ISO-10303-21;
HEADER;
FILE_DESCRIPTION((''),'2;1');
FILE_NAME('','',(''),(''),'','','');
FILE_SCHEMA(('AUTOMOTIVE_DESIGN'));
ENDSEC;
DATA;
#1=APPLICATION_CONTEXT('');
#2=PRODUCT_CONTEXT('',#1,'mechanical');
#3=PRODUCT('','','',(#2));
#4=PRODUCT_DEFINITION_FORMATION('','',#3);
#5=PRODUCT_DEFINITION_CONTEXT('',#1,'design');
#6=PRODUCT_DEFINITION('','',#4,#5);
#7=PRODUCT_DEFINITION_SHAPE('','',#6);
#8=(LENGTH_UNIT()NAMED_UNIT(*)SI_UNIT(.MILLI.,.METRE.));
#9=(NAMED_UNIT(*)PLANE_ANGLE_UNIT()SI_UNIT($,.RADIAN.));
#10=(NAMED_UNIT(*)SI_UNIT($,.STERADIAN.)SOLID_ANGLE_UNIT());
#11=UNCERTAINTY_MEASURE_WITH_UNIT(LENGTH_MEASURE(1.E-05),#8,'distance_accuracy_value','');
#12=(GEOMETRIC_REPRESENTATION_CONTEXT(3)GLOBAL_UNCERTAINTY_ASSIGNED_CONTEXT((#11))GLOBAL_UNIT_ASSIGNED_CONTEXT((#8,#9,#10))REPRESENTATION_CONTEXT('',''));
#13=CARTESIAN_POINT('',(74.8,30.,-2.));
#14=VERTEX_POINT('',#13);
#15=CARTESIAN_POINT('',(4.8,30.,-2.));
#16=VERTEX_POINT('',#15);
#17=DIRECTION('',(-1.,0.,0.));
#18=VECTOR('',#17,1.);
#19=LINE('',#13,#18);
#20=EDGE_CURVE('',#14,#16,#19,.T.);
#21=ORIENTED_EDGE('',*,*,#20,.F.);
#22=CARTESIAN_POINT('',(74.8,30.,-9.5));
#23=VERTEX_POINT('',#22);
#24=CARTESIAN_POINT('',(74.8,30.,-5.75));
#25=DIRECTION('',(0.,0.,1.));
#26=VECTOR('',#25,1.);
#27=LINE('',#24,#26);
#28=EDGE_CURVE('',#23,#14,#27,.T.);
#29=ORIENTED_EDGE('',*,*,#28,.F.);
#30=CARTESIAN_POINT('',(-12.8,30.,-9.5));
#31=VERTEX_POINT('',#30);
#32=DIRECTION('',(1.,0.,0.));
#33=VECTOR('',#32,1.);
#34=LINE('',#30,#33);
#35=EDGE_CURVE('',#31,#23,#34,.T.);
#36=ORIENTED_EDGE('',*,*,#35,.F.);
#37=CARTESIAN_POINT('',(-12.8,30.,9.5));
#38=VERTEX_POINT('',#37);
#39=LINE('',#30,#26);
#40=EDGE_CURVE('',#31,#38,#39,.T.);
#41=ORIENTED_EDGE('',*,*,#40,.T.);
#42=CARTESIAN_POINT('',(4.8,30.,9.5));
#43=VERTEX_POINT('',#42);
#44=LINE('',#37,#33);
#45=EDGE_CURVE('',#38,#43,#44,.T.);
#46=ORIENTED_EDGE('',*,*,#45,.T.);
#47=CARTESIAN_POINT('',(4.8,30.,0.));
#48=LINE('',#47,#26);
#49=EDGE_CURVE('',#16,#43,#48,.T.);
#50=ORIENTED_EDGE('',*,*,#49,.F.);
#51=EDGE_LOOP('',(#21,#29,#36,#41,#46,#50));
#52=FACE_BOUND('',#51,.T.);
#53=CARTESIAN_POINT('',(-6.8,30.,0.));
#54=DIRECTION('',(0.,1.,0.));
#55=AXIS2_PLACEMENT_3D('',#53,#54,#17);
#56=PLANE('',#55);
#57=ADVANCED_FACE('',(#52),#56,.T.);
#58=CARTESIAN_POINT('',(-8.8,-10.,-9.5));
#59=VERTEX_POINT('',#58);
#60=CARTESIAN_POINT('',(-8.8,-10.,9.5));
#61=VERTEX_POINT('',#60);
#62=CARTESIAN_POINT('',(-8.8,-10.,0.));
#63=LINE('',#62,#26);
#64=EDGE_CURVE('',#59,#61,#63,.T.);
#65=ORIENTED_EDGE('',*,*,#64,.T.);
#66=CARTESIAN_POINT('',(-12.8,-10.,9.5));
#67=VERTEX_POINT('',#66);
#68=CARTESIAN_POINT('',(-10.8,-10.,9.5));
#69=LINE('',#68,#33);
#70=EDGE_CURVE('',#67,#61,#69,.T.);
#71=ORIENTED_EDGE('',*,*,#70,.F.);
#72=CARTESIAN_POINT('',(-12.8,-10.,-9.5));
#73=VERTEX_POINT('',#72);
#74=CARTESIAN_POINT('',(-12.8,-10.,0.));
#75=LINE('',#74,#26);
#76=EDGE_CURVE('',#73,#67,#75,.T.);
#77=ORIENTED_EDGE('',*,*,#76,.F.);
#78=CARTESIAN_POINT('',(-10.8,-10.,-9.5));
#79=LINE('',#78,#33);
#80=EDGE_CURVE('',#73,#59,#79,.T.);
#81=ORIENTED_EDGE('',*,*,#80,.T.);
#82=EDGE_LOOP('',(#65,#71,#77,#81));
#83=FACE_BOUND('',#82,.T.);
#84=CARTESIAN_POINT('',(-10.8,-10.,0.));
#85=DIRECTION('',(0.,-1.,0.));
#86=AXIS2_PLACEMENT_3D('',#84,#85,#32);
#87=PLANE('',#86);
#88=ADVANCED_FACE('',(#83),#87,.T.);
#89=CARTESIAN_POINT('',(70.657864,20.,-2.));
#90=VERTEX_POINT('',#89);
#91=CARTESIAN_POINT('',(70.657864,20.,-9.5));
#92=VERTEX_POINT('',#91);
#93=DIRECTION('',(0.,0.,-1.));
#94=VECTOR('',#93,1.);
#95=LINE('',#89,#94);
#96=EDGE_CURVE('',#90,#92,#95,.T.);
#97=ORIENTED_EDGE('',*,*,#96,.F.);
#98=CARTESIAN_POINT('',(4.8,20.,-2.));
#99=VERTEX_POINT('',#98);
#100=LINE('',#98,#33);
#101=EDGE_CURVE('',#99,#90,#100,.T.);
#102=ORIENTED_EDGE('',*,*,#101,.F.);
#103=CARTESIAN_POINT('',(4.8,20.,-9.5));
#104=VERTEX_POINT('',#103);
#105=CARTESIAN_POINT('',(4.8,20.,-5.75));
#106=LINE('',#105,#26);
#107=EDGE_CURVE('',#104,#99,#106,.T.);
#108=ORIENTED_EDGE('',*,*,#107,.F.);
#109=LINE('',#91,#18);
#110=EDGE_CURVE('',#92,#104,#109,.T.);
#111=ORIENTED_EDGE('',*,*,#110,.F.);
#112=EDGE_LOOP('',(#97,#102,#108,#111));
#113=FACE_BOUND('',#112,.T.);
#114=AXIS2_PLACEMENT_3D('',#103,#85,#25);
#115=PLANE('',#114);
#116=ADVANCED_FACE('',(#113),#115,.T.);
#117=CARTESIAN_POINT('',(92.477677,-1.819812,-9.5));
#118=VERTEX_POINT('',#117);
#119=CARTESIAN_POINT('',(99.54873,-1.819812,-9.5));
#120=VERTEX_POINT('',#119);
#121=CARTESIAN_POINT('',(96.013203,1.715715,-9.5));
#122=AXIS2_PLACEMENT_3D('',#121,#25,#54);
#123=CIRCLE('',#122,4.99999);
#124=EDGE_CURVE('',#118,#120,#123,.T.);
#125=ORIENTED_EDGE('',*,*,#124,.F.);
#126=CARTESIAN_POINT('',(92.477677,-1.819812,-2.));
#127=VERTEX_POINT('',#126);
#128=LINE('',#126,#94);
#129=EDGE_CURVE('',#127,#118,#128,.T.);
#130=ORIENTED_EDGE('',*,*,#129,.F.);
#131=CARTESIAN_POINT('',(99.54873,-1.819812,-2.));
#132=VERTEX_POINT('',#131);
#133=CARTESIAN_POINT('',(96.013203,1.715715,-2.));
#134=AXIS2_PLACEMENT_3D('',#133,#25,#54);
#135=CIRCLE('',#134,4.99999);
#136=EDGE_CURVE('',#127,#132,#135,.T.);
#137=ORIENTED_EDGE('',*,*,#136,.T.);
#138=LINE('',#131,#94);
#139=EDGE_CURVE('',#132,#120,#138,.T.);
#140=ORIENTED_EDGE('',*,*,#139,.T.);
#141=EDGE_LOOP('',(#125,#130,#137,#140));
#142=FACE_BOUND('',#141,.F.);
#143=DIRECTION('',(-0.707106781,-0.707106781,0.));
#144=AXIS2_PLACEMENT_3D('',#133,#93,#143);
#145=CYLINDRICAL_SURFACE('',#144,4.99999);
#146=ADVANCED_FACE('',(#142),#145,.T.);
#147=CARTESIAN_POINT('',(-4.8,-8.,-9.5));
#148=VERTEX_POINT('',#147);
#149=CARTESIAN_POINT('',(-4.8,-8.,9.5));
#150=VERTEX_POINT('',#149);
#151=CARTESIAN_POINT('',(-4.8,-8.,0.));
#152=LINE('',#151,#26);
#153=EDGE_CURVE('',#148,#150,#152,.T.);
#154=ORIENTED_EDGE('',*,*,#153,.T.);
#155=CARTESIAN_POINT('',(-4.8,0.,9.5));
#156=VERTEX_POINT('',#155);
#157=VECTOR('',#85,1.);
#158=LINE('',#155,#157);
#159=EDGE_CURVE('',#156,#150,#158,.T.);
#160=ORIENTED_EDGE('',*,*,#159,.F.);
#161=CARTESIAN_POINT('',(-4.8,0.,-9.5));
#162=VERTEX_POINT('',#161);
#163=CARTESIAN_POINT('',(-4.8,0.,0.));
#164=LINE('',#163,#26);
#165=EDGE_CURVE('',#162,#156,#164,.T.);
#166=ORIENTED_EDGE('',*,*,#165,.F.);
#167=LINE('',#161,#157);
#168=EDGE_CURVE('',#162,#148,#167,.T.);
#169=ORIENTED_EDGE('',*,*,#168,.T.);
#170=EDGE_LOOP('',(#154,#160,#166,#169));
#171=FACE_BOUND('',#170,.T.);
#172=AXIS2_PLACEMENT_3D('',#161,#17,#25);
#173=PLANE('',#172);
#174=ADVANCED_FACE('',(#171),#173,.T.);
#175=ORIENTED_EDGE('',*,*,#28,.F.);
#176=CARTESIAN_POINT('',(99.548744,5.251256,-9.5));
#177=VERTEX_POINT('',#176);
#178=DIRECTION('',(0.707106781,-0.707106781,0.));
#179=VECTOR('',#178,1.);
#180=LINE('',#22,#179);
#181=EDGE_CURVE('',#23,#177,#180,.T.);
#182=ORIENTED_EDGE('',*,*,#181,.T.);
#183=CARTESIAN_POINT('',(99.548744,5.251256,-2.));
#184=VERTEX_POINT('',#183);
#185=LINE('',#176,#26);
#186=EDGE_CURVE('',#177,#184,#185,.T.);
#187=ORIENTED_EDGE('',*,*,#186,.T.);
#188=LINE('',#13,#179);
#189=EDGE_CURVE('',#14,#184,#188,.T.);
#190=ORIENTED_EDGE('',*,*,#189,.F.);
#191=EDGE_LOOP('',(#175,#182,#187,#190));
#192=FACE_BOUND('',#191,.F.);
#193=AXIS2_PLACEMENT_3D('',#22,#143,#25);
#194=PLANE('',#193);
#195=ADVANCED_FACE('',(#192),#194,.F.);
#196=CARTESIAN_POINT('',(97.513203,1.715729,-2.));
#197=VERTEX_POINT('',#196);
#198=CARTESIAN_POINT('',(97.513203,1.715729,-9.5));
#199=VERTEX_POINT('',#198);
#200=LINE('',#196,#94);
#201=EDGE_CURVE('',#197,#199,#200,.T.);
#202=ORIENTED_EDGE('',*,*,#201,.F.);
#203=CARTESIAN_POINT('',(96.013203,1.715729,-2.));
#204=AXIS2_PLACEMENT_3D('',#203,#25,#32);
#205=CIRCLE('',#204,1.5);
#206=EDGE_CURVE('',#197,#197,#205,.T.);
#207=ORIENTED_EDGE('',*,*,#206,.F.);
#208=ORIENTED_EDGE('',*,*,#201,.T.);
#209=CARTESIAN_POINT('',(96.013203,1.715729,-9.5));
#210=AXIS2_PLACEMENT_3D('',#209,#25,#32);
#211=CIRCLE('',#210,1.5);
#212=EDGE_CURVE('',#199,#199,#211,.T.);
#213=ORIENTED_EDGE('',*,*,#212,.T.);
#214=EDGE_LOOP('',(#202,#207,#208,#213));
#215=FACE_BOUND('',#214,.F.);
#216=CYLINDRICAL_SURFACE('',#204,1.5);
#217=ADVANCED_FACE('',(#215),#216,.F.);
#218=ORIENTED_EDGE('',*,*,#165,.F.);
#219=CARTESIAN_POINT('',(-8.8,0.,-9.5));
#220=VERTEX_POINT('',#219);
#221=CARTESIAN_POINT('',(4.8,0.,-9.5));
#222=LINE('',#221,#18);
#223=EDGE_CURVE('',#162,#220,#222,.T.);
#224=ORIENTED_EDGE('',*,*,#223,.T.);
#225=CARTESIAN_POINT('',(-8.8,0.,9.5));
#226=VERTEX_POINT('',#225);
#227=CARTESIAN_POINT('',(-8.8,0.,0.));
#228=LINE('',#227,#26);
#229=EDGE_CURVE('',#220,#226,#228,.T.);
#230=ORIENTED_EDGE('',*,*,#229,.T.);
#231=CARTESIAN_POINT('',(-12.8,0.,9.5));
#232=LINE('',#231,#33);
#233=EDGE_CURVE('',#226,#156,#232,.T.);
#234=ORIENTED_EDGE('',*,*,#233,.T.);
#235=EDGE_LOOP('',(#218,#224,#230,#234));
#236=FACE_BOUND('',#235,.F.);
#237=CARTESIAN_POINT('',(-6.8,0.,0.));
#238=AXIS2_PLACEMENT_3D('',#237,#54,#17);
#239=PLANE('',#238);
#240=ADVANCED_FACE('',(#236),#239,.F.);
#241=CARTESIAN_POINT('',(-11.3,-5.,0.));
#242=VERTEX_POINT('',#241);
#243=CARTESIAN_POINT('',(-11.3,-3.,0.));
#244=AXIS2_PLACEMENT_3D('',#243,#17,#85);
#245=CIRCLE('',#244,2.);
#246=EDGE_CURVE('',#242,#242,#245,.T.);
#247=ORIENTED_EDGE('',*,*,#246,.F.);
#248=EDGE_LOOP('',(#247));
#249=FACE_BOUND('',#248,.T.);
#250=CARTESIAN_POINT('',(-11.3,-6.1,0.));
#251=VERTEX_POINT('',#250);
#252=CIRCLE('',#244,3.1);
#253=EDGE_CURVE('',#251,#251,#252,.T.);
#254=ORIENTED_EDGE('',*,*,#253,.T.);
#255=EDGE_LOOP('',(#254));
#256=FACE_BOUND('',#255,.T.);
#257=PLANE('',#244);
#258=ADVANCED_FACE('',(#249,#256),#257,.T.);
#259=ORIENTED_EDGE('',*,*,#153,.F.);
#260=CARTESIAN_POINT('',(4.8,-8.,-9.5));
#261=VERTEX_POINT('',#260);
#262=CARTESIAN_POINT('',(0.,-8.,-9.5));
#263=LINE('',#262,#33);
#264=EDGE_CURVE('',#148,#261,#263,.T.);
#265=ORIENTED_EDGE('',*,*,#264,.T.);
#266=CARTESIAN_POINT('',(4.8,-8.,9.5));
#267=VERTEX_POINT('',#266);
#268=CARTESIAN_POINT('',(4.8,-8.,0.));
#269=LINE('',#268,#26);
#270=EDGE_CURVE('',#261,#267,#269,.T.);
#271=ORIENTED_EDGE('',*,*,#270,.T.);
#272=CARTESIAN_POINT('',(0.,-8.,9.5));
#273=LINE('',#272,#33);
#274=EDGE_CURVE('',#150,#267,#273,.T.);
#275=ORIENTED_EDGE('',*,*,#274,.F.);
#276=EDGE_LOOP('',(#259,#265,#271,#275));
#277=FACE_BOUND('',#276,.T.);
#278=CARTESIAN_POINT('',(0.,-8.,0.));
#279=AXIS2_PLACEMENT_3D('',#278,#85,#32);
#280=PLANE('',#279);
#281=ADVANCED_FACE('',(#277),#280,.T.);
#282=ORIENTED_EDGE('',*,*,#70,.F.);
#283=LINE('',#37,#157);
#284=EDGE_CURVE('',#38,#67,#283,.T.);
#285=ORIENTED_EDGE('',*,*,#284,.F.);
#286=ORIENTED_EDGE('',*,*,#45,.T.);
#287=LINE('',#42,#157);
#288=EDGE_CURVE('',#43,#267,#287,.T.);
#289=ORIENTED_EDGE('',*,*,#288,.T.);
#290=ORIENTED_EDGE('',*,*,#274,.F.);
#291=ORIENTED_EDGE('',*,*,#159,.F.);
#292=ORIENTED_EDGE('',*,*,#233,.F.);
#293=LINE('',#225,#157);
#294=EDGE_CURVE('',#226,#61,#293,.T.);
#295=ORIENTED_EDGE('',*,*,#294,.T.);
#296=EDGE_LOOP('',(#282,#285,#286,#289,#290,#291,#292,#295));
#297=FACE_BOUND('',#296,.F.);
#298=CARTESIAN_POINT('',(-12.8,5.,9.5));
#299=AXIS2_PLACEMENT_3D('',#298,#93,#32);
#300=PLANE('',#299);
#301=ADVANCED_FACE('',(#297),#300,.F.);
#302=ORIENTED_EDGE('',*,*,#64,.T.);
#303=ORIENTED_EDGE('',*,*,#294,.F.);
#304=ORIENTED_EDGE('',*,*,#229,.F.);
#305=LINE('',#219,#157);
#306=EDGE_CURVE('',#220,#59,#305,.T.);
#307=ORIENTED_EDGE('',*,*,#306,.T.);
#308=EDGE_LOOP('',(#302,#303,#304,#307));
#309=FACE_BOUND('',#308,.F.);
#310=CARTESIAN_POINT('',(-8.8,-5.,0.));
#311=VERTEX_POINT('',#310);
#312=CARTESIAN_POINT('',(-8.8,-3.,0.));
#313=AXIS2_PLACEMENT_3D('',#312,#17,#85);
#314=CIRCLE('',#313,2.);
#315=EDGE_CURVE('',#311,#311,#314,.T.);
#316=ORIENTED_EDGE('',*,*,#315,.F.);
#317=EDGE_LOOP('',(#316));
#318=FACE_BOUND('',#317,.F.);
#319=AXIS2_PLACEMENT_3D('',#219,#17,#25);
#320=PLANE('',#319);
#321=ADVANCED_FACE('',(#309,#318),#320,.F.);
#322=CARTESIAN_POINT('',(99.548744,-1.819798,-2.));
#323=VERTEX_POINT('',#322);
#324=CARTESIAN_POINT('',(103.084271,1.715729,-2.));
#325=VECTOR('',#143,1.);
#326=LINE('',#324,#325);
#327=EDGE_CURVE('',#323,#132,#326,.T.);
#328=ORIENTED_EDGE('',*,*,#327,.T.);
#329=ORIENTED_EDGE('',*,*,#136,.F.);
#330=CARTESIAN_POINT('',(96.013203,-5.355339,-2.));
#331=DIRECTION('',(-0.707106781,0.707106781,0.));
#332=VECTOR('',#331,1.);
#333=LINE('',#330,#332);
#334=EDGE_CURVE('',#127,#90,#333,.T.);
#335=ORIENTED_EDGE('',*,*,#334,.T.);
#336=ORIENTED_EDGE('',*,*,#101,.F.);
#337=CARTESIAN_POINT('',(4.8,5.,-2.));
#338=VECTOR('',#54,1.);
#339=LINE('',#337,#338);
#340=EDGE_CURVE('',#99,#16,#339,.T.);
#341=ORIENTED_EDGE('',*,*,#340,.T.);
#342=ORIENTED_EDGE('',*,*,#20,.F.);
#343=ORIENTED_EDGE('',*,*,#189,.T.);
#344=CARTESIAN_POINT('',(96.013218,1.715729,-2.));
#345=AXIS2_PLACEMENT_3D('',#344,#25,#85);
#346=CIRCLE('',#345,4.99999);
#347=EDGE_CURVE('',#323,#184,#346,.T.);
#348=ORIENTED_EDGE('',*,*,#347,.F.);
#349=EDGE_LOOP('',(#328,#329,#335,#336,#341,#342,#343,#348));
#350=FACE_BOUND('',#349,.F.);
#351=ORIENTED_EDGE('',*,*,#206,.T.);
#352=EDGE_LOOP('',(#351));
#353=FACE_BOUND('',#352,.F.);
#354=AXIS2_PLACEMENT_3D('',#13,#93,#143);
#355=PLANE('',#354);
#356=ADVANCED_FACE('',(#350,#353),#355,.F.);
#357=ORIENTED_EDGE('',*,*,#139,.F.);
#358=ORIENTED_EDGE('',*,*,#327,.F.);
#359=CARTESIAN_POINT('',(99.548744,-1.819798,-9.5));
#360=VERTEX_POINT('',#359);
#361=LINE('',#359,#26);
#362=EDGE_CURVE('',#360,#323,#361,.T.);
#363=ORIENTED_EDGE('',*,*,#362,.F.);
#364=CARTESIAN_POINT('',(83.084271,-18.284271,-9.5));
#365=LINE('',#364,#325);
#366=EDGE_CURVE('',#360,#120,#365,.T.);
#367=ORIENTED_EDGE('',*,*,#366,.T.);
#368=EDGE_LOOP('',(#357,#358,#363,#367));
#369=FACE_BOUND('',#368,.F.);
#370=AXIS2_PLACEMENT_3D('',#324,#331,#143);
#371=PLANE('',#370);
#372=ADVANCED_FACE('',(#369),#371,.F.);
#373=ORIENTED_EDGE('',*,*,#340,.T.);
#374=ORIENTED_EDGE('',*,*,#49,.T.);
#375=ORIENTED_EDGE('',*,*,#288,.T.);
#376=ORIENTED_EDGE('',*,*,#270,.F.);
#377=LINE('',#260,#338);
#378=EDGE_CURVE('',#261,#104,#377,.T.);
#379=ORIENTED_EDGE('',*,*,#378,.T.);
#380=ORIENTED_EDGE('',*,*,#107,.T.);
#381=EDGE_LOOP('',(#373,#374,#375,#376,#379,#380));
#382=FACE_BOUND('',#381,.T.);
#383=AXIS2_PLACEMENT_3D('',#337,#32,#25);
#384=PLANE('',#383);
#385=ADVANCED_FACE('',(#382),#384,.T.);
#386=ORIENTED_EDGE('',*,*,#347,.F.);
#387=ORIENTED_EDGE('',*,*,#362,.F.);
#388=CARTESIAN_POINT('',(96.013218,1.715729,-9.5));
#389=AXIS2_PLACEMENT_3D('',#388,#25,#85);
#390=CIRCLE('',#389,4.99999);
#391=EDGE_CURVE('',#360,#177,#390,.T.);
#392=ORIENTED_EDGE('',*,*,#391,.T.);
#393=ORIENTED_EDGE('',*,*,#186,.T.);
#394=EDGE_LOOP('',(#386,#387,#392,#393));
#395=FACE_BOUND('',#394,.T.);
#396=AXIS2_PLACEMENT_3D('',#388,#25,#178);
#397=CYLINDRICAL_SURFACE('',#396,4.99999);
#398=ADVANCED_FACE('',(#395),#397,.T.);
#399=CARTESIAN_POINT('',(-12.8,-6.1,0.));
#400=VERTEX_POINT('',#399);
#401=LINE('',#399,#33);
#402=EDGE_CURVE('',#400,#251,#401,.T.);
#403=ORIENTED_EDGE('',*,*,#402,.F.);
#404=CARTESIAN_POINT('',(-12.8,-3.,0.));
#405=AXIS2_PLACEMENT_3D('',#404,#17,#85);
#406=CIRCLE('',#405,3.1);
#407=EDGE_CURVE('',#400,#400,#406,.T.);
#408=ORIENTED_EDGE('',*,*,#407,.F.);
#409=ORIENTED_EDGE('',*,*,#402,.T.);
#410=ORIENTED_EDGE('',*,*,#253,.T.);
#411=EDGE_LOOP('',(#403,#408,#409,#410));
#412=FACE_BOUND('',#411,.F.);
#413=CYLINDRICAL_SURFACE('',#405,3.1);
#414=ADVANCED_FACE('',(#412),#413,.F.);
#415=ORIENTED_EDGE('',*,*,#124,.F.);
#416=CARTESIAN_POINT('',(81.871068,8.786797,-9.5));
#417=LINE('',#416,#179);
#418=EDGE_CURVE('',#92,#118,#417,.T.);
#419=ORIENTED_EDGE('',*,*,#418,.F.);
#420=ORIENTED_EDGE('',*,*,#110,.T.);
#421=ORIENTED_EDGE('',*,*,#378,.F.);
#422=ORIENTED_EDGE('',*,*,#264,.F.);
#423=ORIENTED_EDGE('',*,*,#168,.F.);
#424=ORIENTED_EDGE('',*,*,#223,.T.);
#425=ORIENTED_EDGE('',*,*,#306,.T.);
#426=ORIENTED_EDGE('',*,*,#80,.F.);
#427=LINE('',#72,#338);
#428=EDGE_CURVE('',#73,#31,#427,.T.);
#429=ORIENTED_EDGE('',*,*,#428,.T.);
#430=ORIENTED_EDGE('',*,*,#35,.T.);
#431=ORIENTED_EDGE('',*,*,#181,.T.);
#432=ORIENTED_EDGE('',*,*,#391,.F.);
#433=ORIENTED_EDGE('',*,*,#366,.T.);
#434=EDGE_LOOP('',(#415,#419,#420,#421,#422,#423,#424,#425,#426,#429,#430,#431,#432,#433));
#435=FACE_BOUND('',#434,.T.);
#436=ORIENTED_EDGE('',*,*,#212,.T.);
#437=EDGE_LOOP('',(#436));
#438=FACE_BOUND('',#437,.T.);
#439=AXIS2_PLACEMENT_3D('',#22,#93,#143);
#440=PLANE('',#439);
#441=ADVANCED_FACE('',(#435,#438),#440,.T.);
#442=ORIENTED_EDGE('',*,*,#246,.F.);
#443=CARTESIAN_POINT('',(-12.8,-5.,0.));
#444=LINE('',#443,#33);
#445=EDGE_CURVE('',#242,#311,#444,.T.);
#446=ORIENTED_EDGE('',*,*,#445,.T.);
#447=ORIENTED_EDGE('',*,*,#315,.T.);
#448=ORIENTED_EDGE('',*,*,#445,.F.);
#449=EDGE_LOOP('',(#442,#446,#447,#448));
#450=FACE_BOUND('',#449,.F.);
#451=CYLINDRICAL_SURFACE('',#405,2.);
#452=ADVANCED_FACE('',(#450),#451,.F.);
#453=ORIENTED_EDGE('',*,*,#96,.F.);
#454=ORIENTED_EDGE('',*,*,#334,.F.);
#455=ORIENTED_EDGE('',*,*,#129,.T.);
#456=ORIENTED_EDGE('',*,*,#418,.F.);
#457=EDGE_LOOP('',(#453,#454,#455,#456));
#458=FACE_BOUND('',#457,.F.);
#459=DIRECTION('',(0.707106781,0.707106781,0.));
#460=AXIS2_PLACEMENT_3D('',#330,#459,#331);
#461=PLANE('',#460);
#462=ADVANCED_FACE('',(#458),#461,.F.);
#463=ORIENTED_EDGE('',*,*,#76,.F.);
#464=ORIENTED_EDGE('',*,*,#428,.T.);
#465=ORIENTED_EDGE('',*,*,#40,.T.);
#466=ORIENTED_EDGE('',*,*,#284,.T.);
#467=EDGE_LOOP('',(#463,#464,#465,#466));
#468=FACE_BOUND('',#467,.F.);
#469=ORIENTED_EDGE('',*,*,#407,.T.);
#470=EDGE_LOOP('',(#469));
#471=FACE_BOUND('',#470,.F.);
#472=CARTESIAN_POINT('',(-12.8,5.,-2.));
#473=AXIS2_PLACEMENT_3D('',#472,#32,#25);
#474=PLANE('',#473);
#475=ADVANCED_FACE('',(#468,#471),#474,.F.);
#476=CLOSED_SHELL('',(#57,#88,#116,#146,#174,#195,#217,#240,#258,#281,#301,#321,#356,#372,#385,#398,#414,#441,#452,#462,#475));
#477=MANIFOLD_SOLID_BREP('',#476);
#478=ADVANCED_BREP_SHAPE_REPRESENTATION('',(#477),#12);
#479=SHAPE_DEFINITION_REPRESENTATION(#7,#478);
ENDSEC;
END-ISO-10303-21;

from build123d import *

# Parameters (mm, degrees)
F0_W      = 9.6
F0_H      = 19
F1_DEPTH  = 8
F2_W      = 4
F2_H      = 19
F2_W_2    = 9.6
F3_DEPTH  = 5
F4_W      = 4
F4_H      = 19
F5_DEPTH  = 10
F6_R      = 2
F7_DEPTH  = 4
F6_R_2    = 3.1
F8_DEPTH  = 1.5
F9_W      = 17.6
F9_H      = 7.5
F10_DEPTH = 25
F11_W     = 10
F11_H     = 7.5
F12_DEPTH = 70
F14_DEPTH = 25
F15_DEPTH = 40
F16_R     = 1.5
F17_DEPTH = 25
F18_DEPTH = 25
F20_DEPTH = 25
F21_R     = 4.99999


# Not quite as in the source:
# - a fillet or chamfer is up to 0.001 mm smaller than in the source, because OpenCascade refuses the exact size


with BuildPart() as f1:
    # F0 (on Front) → F1 (new body)
    with BuildSketch(Plane.XZ):
        Rectangle(F0_W, F0_H)
    extrude(amount=F1_DEPTH)

    # F2 (on face) → F3 (join)
    with BuildSketch(Plane(origin=(0, 0, 0), x_dir=(-1, 0, 0), z_dir=(0, 1, 0))):
        with Locations((6.8, 0)):
            Rectangle(F2_W, F2_H)
        Rectangle(F2_W_2, F2_H)
        with Locations((10.8, 0)):
            Rectangle(F2_W, F2_H)
    extrude(amount=F3_DEPTH)

    # F4 (on face) → F5 (join)
    with BuildSketch(Plane.XZ):
        with Locations((-10.8, 0)):
            Rectangle(F4_W, F4_H)
    extrude(amount=F5_DEPTH)

    # F6 (on face) → F7 (cut, through all)
    with BuildSketch(Plane(origin=(-12.8, 0, 0), x_dir=(0, -1, 0), z_dir=(-1, 0, 0))):
        with Locations((3, 0)):
            Circle(F6_R)
    extrude(amount=-F7_DEPTH, mode=Mode.SUBTRACT)

    # F6 (on face) → F8 (cut)
    with BuildSketch(Plane(origin=(-12.8, 0, 0), x_dir=(0, -1, 0), z_dir=(-1, 0, 0))):
        with Locations((3, 0)):
            Circle(F6_R_2)
        with Locations((3, 0)):
            Circle(F6_R, mode=Mode.SUBTRACT)
    extrude(amount=-F8_DEPTH, mode=Mode.SUBTRACT)

    # F9 (on face) → F10 (join)
    with BuildSketch(Plane(origin=(0, 5, 0), x_dir=(-1, 0, 0), z_dir=(0, 1, 0))):
        with Locations((4, -5.75)):
            Rectangle(F9_W, F9_H)
    extrude(amount=F10_DEPTH)

    # F11 (on face) → F12 (join)
    with BuildSketch(Plane.YZ.offset(4.8)):
        with Locations((25, -5.75)):
            Rectangle(F11_W, F11_H)
    extrude(amount=F12_DEPTH)

    # F13 (on face) → F14 (cut)
    with BuildSketch(Plane.XY.offset(-2)):
        Polygon((74.8, 30), (64.8, 20), (74.8, 20), align=None)
    extrude(amount=-F14_DEPTH, mode=Mode.SUBTRACT)

    # F15 (add): a face of the model
    f15_faces = [f1.faces().sort_by_distance(p)[0] for p in [
        (69.8, 25, -5.75),
    ]]
    extrude(f15_faces, amount=F15_DEPTH)

    # F16 (on face) → F17 (cut)
    with BuildSketch(Plane.XY.offset(-2)):
        with Locations((96.0132034356, 1.7157287525)):
            Circle(F16_R)
    extrude(amount=-F17_DEPTH, mode=Mode.SUBTRACT)

    # F18 (add): a face of the model
    f18_faces = [f1.faces().sort_by_distance(p)[0] for p in [
        (-4, 5, 3.75),
    ]]
    extrude(f18_faces, amount=F18_DEPTH)

    # F19 (on face) → F20 (cut)
    with BuildSketch(Plane.XY.offset(-2)):
        Polygon((93.0842712475, -8.2842712475), (96.0132034356, -5.3553390593), (70.6578643763, 20), (64.8, 20), align=None)
    extrude(amount=-F20_DEPTH, mode=Mode.SUBTRACT)

    # F21 (radius 5 in the source; OpenCascade refuses exactly that, so slightly less here)
    f21_edges = [f1.edges().sort_by_distance(p)[0] for p in [
        (96.013203, -5.355339, -5.75),
        (103.084271, 1.715729, -5.75),
    ]]
    fillet(f21_edges, radius=F21_R)


solid = f1.part
